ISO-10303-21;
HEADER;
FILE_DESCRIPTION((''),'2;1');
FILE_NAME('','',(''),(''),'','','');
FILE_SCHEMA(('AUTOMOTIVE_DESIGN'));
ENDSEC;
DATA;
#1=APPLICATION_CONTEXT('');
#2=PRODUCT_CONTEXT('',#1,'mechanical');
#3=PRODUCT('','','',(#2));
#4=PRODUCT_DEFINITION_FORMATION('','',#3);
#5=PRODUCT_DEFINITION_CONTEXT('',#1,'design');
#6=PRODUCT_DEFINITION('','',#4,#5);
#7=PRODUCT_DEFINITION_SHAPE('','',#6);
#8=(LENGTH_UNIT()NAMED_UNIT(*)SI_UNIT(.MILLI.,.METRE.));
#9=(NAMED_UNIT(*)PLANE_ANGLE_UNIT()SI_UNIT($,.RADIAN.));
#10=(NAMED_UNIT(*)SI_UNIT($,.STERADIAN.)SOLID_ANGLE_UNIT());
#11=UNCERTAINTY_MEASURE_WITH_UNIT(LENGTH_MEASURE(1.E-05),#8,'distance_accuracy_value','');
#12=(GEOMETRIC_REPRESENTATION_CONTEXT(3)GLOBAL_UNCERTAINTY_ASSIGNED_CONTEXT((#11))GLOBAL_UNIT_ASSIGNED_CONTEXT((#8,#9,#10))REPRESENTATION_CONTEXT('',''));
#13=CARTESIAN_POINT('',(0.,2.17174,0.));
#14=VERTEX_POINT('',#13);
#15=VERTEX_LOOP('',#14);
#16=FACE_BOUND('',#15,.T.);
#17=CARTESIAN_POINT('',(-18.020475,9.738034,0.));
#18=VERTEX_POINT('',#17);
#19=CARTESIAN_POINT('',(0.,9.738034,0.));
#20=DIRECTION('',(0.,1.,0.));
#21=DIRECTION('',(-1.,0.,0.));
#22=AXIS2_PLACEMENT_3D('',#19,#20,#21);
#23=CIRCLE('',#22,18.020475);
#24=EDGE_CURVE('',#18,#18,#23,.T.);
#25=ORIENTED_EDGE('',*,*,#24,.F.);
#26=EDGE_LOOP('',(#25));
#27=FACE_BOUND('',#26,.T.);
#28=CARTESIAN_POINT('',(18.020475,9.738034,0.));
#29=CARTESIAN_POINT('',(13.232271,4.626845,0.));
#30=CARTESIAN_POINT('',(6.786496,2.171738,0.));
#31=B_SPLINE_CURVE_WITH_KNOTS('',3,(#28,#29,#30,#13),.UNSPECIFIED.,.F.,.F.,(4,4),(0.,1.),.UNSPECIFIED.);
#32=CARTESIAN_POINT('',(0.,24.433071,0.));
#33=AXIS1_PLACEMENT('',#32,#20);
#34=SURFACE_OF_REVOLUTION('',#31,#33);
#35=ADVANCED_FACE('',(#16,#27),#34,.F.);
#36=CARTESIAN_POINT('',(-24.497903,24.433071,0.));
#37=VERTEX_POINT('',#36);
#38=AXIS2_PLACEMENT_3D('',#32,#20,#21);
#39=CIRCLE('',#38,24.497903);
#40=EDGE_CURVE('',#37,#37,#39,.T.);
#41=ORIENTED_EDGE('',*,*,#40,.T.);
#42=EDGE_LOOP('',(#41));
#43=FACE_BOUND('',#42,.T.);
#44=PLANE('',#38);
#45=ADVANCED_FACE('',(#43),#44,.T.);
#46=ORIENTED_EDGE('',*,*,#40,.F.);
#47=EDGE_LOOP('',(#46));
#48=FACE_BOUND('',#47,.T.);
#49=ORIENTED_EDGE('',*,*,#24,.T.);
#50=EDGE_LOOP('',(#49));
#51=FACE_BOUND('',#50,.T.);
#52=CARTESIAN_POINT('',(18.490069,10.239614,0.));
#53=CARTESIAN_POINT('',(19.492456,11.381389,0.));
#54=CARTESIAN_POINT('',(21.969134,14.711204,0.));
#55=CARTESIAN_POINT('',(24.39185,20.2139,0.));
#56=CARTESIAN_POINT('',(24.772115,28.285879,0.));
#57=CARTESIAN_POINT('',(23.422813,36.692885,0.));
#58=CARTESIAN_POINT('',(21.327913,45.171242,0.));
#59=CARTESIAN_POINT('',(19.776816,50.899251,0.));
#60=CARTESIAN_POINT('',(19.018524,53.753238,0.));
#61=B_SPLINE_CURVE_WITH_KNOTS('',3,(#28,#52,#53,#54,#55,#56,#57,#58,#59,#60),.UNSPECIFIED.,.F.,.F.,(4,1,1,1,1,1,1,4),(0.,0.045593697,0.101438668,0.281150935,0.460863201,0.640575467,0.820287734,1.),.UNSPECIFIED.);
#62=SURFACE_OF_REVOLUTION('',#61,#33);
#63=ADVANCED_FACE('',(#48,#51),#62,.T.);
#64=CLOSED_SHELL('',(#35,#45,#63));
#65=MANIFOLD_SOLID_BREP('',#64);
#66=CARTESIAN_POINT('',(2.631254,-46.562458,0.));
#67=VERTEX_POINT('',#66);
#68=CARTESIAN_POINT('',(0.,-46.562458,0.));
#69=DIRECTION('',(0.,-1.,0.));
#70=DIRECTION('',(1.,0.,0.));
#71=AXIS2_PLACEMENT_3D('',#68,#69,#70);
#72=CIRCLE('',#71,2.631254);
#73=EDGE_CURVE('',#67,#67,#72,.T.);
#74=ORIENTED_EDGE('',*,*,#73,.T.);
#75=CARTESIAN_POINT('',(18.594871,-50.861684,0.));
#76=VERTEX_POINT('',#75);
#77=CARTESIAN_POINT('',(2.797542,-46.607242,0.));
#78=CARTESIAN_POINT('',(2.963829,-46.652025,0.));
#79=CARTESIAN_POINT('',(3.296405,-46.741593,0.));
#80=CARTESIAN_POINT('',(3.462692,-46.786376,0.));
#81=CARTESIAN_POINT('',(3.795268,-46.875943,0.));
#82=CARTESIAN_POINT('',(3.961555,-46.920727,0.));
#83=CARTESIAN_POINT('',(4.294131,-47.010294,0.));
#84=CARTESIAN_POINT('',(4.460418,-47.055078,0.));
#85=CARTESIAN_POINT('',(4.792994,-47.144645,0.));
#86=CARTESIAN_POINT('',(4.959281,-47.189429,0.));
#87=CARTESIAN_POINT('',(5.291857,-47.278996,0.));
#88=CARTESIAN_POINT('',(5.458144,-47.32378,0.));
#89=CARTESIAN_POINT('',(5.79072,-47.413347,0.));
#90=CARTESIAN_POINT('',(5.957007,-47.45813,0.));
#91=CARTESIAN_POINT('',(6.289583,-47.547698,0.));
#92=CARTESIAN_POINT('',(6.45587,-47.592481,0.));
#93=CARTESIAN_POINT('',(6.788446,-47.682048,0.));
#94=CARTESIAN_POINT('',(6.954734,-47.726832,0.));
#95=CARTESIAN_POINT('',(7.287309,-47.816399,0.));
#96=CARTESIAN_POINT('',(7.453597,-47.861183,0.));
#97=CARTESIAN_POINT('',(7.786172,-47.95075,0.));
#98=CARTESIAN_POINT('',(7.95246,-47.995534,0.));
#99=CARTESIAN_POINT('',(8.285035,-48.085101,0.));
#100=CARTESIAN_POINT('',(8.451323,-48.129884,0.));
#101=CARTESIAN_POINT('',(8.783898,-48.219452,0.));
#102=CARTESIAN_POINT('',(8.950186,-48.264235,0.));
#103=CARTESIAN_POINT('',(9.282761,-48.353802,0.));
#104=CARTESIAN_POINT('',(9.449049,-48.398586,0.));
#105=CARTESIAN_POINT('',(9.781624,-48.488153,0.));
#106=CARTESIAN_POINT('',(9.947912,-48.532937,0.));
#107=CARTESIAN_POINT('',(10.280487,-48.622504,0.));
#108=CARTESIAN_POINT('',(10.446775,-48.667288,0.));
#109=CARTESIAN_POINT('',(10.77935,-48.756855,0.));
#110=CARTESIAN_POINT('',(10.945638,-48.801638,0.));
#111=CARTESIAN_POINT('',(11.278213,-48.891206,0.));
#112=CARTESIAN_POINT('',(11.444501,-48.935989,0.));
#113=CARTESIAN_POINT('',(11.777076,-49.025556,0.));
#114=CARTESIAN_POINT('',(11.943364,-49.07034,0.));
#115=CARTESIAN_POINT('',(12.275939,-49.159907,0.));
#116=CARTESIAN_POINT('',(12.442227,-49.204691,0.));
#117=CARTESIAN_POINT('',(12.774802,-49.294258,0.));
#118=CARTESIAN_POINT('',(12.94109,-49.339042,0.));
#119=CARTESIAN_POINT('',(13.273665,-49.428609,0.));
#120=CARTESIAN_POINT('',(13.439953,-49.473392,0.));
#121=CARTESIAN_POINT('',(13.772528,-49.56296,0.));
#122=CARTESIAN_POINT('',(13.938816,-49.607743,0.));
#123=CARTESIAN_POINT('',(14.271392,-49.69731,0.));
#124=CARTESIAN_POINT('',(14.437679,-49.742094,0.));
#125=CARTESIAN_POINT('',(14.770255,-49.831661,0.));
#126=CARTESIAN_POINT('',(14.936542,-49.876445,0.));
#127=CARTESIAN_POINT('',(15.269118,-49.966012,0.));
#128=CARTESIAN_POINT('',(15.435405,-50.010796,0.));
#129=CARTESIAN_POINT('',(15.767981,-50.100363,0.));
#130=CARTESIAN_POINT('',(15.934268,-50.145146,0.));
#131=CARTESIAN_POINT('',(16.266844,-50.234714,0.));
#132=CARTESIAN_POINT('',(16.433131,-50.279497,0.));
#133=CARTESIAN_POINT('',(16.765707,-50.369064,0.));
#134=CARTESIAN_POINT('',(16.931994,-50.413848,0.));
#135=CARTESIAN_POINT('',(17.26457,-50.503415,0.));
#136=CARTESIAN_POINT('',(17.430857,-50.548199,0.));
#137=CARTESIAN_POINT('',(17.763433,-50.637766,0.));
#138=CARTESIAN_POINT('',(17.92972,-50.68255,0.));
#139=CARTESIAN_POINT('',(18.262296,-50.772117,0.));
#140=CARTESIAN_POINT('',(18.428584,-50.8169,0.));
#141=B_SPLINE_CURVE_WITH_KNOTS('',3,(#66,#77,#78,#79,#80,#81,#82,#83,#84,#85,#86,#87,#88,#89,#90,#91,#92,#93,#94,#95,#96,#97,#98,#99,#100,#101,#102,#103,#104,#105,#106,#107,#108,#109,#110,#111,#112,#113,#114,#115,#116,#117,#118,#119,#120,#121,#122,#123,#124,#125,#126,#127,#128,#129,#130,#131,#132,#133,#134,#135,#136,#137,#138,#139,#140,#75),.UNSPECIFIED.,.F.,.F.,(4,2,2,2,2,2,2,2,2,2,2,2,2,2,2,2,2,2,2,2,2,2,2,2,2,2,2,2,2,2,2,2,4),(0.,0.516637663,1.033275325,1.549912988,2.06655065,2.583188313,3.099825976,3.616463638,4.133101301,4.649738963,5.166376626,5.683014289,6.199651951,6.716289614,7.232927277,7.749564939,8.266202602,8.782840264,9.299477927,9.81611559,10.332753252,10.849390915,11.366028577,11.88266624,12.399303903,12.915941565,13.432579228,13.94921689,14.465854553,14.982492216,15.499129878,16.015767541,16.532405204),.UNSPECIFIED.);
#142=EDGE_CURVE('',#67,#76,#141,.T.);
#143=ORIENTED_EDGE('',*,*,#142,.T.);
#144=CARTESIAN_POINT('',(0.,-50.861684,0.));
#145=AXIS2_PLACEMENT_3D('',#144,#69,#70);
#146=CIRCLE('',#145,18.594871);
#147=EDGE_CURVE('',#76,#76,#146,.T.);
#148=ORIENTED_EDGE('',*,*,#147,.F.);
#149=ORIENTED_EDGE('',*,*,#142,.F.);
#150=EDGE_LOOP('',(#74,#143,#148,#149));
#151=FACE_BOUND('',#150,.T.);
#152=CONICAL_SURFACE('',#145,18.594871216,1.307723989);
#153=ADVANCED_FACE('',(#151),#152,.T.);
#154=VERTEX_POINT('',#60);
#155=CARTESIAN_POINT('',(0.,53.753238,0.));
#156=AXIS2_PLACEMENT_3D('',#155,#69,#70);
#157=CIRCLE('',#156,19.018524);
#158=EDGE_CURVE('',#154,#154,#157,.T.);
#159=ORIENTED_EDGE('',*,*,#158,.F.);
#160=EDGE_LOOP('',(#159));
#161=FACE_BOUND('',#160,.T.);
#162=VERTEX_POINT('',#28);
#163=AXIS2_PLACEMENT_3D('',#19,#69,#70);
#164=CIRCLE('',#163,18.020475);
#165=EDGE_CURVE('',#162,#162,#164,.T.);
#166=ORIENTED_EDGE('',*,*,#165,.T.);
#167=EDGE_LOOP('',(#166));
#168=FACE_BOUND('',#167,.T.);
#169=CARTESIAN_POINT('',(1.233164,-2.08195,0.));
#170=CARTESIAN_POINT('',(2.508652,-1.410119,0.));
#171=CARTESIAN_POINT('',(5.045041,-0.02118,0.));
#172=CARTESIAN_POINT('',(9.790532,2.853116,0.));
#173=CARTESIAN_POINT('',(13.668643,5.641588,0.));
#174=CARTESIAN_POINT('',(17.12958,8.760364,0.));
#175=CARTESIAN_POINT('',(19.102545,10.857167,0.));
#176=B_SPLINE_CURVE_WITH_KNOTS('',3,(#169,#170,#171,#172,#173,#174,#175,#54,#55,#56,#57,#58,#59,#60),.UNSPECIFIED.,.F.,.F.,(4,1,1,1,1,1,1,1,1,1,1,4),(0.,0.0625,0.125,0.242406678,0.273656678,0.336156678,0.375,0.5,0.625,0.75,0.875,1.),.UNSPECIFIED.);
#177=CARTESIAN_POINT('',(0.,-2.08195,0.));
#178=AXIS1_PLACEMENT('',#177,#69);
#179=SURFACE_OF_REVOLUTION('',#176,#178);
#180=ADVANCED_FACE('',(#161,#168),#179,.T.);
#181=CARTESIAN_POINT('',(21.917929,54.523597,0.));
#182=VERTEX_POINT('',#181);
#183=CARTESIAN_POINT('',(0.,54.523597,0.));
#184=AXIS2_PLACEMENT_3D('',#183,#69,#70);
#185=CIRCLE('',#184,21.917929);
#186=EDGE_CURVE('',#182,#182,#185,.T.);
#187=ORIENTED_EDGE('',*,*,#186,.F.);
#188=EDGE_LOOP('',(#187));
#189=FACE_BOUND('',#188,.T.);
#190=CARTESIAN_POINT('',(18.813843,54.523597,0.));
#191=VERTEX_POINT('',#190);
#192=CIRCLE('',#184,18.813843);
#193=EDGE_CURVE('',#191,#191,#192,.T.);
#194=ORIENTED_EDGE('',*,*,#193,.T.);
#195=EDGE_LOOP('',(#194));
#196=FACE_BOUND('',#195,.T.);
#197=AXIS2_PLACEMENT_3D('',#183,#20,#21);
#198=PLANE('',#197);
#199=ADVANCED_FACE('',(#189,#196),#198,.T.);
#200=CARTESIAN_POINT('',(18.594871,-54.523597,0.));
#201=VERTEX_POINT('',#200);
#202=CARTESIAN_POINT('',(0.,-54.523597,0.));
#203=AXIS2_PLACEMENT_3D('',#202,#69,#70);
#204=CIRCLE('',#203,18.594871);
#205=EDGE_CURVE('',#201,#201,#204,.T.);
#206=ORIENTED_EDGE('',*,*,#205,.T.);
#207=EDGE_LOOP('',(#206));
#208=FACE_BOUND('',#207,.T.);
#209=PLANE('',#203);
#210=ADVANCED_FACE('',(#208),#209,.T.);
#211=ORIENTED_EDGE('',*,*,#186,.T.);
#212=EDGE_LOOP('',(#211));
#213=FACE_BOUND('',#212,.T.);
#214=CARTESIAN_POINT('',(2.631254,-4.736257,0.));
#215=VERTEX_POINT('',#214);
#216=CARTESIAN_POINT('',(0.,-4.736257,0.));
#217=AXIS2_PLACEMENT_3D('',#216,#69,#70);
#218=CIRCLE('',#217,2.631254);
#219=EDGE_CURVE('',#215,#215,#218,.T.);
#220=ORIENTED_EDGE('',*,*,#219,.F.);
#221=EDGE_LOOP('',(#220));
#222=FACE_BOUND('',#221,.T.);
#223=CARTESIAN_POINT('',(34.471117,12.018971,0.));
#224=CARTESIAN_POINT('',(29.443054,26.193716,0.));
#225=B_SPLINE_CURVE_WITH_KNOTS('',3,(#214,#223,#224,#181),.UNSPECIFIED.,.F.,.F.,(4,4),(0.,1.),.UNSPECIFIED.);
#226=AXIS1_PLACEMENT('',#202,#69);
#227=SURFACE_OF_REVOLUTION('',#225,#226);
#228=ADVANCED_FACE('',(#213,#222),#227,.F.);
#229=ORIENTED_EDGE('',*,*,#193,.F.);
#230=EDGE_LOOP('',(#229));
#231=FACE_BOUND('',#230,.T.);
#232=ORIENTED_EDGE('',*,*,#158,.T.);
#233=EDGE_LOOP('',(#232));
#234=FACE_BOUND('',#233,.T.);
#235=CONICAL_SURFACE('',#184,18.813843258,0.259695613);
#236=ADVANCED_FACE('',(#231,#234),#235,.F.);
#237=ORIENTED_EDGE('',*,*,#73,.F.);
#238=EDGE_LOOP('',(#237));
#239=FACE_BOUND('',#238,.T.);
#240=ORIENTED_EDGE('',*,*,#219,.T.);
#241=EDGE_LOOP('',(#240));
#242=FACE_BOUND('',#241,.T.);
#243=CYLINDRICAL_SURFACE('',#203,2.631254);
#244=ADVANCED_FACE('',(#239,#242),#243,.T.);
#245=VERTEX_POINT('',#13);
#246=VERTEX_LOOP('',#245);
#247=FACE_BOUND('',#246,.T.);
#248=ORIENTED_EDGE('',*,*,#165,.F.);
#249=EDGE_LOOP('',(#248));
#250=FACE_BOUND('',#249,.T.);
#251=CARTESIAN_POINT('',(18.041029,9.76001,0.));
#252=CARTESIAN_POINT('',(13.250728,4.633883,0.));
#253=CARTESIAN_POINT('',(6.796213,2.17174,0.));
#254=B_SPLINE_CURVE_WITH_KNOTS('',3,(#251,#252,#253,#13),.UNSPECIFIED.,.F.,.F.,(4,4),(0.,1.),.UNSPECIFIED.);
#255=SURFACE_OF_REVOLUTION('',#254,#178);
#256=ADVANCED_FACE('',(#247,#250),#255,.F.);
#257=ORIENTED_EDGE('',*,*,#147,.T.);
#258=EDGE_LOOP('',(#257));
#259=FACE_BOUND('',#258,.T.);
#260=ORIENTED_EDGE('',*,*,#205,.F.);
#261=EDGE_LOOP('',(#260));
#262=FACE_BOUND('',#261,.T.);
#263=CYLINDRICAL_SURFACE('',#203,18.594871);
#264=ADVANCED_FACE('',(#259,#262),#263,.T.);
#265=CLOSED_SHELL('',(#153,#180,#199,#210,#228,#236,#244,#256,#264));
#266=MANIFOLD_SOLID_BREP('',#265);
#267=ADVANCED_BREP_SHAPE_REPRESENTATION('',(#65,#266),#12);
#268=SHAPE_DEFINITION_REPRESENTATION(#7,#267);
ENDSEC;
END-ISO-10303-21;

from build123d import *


# Read off the part's stored shape, not the designer's step: Cut-Revolve1
with BuildPart() as part:
    # Sketch2 → Revolve1 (revolve)
    with BuildSketch(Plane.XY):
        with BuildLine():
            Line((2.631253823, -46.562458286), (2.631253823, -4.736256881))
            add(Edge.make_bspline(
                [(2.631253823, -4.736256881), (34.471117499, 12.018970529), (29.443053516, 26.193716055), (21.917928882, 54.523597031)],
                knots=[0, 0, 0, 0, 1, 1, 1, 1], degree=3))
            Line((21.917928882, 54.523597031), (0, 54.523597031))
            Line((0, 54.523597031), (0, -54.523597031))
            Line((0, -54.523597031), (18.594871216, -54.523597031))
            Line((18.594871216, -54.523597031), (18.594871216, -50.861683976))
            Line((18.594871216, -50.861683976), (2.631253823, -46.562458286))
        make_face()
    revolve(axis=Axis((0, -54.523597031, 0), (0, 1, 0)))

    # Cut-Revolve1 outline → Cut-Revolve1 (revolve, cut)
    with BuildSketch(Plane.XY):
        with BuildLine():
            add(Edge.make_bspline(
                [(18.020471145, 9.738037596), (13.232269499, 4.62684716), (6.786495281, 2.171739839), (0, 2.171739839)],
                knots=[0.001429836, 0.001429836, 0.001429836, 0.001429836, 1, 1, 1, 1], degree=3))
            add(Edge.make_bspline(
                [(18.020471145, 9.738037596), (18.490068509, 10.239614321), (19.492455887, 11.381389394), (21.969134176, 14.711204078), (24.39185026, 20.213899803), (24.772115374, 28.28587885), (23.422813446, 36.692884797), (21.327912764, 45.171242003), (19.776816311, 50.899250576), (19.018524326, 53.75323788)],
                knots=[0.304443695, 0.304443695, 0.304443695, 0.304443695, 0.336156678, 0.375, 0.5, 0.625, 0.75, 0.875, 1, 1, 1, 1], degree=3))
            Line((19.018524326, 53.75323788), (18.813843258, 54.523597031))
            Line((18.813843258, 54.523597031), (0, 54.523597031))
            Line((0, 54.523597031), (0, 2.171739839))
        make_face()
    revolve(axis=Axis((0, 0, 0), (0, 1, 0)), mode=Mode.SUBTRACT)


with BuildPart() as body_2:
    # Sketch5 → Revolve2 (revolve)
    with BuildSketch(Plane.XY):
        with BuildLine():
            Line((24.49790326, 24.433071211), (0, 24.433071211))
            Line((0, 24.433071211), (0, 2.171739839))
            add(Edge.make_bspline(
                [(18.02047452, 9.738034434), (13.232271308, 4.626844539), (6.786495937, 2.171738373), (0, 2.171739839)],
                knots=[0, 0, 0, 0, 1, 1, 1, 1], degree=3))
            add(Edge.make_bspline(
                [(18.02047452, 9.738034434), (18.490068509, 10.239614321), (19.492455887, 11.381389394), (21.969134176, 14.711204078), (23.888170898, 19.069896885), (24.417216372, 23.045719749), (24.49790326, 24.433071211)],
                knots=[0, 0, 0, 0, 0.045593697, 0.101438668, 0.281150935, 0.374529239, 0.374529239, 0.374529239, 0.374529239], degree=3))
        make_face()
    revolve(axis=Axis((0, 24.433071211, 0), (0, -1, 0)))


solid = Compound([part.part, body_2.part])
